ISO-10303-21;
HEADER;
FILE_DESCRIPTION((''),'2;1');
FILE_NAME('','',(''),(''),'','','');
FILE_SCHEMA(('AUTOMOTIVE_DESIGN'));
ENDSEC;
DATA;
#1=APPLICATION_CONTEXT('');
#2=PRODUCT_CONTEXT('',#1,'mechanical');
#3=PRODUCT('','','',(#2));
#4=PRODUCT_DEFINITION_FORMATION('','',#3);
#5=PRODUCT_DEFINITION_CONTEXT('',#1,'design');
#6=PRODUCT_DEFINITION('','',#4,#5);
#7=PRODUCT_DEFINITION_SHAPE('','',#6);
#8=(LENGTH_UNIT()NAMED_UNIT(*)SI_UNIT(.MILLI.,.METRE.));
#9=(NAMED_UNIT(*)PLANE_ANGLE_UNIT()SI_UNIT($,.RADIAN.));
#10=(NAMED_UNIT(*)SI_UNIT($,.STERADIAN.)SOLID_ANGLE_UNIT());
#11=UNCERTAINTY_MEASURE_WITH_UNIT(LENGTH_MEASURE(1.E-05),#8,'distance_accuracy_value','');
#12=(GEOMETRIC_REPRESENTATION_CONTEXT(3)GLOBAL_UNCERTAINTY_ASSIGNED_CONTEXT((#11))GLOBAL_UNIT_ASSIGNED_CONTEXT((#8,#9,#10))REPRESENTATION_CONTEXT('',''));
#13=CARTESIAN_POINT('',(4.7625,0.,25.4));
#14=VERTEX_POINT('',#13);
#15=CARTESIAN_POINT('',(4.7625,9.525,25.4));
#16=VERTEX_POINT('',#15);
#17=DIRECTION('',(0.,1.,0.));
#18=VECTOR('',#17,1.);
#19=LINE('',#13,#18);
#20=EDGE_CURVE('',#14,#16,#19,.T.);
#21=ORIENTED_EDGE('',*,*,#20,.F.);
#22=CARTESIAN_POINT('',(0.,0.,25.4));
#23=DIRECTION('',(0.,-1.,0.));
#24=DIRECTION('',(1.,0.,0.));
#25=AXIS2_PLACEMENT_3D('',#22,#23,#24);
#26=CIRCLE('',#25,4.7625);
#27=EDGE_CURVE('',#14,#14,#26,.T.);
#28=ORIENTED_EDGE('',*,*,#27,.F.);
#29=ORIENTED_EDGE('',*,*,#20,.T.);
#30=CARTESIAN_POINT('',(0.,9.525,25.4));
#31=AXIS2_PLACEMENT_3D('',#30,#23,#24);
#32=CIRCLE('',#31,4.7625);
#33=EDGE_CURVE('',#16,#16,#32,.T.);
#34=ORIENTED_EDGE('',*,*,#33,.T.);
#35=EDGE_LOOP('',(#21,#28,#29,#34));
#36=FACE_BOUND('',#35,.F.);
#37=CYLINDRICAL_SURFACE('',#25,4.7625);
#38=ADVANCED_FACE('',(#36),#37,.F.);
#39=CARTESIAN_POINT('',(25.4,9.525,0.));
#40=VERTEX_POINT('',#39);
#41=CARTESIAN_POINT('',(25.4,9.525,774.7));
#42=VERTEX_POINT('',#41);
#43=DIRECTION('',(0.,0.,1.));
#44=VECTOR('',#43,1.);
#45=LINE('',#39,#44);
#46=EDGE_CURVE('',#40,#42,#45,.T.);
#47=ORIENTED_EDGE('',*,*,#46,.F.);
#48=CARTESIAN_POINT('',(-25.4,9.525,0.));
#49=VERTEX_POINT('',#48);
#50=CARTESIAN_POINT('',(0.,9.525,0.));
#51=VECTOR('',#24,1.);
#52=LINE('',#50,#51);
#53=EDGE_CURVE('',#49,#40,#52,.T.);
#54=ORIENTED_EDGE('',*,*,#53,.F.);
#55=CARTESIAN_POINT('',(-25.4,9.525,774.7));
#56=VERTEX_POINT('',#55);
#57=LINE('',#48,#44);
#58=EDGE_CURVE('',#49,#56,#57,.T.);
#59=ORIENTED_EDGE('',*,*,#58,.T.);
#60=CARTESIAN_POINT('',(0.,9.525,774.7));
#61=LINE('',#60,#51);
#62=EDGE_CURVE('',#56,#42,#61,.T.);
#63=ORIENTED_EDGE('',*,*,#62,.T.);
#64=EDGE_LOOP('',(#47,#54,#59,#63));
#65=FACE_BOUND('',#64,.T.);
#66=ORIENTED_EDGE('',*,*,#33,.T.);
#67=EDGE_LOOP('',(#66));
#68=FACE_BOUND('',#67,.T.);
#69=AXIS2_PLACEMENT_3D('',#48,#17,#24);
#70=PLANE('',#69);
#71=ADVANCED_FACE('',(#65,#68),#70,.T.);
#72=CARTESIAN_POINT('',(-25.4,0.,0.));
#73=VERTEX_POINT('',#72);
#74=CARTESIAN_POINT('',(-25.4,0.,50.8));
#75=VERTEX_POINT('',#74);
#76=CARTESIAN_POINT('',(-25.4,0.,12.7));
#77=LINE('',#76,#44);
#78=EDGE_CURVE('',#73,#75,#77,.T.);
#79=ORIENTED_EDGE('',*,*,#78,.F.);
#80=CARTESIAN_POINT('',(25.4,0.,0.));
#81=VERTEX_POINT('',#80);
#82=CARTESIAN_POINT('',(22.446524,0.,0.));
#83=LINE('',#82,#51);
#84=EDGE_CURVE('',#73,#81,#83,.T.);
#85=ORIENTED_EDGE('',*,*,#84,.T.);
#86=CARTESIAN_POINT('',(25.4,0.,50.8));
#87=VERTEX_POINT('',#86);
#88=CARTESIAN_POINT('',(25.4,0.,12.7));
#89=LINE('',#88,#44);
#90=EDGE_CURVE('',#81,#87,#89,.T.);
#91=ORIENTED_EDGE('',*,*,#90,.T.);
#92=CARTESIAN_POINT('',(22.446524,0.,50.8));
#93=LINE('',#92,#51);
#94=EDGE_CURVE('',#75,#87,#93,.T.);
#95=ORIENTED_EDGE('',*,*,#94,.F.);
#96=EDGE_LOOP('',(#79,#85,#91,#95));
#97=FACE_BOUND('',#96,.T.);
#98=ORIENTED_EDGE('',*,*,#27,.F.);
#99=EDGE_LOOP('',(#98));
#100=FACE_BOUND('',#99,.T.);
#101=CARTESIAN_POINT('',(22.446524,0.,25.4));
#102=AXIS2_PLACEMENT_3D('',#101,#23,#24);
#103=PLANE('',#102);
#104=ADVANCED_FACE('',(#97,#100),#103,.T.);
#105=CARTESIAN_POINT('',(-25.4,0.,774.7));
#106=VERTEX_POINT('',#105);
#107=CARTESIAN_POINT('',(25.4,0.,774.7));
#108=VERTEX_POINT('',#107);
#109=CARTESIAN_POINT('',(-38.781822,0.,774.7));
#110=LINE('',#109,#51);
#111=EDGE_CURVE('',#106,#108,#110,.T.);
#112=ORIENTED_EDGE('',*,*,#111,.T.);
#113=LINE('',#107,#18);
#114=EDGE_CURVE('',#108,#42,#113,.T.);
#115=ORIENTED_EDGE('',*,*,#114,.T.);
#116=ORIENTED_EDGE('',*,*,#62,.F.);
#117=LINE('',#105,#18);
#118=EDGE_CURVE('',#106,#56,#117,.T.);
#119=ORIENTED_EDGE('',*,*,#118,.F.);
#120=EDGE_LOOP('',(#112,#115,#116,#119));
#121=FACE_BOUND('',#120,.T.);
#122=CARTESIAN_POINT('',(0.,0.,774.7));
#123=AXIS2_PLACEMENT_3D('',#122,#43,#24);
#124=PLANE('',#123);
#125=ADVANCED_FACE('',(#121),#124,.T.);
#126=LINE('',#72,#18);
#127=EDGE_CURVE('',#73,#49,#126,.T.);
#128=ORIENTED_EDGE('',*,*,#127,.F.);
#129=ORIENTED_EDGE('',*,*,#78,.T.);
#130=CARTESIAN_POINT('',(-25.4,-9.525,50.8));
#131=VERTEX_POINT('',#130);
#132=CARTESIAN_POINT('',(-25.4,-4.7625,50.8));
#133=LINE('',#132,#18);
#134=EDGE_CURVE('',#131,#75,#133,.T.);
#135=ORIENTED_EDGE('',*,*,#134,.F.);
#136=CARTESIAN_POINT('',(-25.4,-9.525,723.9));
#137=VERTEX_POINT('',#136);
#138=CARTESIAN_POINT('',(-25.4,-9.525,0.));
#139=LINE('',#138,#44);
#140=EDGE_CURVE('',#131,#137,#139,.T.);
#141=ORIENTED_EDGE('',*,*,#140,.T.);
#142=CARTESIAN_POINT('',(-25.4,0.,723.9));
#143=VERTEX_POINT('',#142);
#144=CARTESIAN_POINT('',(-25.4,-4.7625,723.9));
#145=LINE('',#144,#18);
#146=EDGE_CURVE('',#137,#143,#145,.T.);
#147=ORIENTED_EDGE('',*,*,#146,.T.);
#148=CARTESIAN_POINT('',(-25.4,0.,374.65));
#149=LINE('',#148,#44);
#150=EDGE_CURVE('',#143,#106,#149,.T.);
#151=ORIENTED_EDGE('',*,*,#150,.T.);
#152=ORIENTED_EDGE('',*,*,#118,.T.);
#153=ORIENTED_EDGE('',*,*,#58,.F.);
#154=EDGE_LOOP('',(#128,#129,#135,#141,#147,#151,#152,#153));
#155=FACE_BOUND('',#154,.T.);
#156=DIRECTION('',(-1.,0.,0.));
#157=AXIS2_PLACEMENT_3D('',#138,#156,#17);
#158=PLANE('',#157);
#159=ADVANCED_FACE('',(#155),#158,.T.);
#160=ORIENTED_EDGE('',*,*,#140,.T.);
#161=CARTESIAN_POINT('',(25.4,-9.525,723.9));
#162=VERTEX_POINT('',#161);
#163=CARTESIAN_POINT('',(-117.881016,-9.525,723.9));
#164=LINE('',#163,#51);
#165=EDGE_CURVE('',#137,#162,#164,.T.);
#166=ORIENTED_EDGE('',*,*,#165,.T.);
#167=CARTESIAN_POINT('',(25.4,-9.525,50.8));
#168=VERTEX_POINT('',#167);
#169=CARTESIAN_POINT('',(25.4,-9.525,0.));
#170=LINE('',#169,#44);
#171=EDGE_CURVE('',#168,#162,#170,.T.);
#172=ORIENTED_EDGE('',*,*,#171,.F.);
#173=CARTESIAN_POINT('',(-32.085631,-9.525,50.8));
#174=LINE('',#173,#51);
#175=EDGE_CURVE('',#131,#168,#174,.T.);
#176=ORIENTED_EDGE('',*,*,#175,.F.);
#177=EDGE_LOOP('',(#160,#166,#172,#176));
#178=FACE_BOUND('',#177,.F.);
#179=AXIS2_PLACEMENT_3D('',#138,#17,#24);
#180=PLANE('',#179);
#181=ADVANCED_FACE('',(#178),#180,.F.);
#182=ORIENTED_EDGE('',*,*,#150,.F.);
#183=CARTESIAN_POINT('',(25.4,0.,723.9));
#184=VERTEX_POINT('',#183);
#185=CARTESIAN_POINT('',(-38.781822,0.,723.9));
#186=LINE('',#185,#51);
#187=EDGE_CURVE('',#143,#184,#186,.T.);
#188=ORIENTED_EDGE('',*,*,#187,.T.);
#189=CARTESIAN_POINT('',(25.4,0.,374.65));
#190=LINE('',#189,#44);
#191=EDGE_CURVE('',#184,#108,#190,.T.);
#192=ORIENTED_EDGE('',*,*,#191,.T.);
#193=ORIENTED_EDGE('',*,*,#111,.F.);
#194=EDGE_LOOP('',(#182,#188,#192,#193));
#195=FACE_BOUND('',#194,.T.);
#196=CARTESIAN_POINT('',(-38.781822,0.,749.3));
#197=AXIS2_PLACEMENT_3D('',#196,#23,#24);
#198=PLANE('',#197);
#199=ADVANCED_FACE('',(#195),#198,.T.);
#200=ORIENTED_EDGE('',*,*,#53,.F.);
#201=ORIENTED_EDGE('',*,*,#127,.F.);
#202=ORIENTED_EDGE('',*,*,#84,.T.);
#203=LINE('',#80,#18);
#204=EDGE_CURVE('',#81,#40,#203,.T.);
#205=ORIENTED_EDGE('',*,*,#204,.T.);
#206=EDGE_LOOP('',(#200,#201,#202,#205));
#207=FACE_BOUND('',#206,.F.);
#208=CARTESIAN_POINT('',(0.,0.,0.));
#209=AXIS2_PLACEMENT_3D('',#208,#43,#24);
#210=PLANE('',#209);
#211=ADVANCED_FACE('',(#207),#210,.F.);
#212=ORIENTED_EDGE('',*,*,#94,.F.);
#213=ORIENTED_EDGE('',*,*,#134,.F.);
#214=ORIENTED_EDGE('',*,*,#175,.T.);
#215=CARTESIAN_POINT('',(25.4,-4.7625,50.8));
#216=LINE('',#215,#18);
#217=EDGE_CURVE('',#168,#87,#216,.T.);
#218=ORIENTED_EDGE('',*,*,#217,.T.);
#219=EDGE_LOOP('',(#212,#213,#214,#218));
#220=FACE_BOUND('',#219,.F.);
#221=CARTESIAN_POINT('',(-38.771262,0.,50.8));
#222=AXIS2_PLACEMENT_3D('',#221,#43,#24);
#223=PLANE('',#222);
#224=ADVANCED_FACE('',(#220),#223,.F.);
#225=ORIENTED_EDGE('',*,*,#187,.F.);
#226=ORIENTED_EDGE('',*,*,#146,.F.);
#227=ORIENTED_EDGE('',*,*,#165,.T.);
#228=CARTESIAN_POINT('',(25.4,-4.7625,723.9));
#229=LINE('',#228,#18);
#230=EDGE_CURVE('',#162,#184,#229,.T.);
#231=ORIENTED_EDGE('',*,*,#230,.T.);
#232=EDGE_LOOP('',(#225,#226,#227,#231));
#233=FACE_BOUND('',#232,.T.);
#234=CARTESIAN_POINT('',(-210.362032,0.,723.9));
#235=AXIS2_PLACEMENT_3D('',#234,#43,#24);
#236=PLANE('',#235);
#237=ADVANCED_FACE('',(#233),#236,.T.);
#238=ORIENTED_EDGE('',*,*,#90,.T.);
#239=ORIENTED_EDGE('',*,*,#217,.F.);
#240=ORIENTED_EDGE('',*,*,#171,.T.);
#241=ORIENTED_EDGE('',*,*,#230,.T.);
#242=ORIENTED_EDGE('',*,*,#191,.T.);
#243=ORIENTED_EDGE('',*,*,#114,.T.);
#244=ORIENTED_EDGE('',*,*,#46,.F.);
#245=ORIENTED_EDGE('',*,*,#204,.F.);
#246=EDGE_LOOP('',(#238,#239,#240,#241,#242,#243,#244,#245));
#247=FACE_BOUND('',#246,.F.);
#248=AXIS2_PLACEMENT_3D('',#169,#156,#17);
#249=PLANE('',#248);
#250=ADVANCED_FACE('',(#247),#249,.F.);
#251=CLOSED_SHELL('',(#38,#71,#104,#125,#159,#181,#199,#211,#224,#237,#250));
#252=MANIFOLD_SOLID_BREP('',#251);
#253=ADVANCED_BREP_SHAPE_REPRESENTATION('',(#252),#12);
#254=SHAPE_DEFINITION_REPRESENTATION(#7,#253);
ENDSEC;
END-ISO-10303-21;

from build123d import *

# Parameters (mm, degrees)
F0_W     = 50.8
F0_H     = 19.05
F1_DEPTH = 774.7
F2_W     = 122.43557321
F2_H     = 50.8
F2_W_2   = 343.1604206562
F3_DEPTH = 25.4
F4_R     = 4.7625
F5_DEPTH = 25.4


# Not quite as in the source:
# - a feature names something its author has since deleted; it is built from what else it names


with BuildPart() as f1:
    # F0 (on Top) → F1 (new body)
    with BuildSketch(Plane.XY):
        Rectangle(F0_W, F0_H)
    extrude(amount=F1_DEPTH)

    # F2 (on Front) → F3 (cut)
    with BuildSketch(Plane.XZ):
        with Locations((22.4465244144, 25.4)):
            Rectangle(F2_W, F2_H)
        with Locations((-38.7818217278, 749.3)):
            Rectangle(F2_W_2, F2_H)
    extrude(amount=F3_DEPTH, mode=Mode.SUBTRACT)

    # F4 (on Front) → F5 (cut)
    with BuildSketch(Plane.XZ):
        with Locations((0, 25.4)):
            Circle(F4_R)
    extrude(amount=-F5_DEPTH, mode=Mode.SUBTRACT)


solid = f1.part
